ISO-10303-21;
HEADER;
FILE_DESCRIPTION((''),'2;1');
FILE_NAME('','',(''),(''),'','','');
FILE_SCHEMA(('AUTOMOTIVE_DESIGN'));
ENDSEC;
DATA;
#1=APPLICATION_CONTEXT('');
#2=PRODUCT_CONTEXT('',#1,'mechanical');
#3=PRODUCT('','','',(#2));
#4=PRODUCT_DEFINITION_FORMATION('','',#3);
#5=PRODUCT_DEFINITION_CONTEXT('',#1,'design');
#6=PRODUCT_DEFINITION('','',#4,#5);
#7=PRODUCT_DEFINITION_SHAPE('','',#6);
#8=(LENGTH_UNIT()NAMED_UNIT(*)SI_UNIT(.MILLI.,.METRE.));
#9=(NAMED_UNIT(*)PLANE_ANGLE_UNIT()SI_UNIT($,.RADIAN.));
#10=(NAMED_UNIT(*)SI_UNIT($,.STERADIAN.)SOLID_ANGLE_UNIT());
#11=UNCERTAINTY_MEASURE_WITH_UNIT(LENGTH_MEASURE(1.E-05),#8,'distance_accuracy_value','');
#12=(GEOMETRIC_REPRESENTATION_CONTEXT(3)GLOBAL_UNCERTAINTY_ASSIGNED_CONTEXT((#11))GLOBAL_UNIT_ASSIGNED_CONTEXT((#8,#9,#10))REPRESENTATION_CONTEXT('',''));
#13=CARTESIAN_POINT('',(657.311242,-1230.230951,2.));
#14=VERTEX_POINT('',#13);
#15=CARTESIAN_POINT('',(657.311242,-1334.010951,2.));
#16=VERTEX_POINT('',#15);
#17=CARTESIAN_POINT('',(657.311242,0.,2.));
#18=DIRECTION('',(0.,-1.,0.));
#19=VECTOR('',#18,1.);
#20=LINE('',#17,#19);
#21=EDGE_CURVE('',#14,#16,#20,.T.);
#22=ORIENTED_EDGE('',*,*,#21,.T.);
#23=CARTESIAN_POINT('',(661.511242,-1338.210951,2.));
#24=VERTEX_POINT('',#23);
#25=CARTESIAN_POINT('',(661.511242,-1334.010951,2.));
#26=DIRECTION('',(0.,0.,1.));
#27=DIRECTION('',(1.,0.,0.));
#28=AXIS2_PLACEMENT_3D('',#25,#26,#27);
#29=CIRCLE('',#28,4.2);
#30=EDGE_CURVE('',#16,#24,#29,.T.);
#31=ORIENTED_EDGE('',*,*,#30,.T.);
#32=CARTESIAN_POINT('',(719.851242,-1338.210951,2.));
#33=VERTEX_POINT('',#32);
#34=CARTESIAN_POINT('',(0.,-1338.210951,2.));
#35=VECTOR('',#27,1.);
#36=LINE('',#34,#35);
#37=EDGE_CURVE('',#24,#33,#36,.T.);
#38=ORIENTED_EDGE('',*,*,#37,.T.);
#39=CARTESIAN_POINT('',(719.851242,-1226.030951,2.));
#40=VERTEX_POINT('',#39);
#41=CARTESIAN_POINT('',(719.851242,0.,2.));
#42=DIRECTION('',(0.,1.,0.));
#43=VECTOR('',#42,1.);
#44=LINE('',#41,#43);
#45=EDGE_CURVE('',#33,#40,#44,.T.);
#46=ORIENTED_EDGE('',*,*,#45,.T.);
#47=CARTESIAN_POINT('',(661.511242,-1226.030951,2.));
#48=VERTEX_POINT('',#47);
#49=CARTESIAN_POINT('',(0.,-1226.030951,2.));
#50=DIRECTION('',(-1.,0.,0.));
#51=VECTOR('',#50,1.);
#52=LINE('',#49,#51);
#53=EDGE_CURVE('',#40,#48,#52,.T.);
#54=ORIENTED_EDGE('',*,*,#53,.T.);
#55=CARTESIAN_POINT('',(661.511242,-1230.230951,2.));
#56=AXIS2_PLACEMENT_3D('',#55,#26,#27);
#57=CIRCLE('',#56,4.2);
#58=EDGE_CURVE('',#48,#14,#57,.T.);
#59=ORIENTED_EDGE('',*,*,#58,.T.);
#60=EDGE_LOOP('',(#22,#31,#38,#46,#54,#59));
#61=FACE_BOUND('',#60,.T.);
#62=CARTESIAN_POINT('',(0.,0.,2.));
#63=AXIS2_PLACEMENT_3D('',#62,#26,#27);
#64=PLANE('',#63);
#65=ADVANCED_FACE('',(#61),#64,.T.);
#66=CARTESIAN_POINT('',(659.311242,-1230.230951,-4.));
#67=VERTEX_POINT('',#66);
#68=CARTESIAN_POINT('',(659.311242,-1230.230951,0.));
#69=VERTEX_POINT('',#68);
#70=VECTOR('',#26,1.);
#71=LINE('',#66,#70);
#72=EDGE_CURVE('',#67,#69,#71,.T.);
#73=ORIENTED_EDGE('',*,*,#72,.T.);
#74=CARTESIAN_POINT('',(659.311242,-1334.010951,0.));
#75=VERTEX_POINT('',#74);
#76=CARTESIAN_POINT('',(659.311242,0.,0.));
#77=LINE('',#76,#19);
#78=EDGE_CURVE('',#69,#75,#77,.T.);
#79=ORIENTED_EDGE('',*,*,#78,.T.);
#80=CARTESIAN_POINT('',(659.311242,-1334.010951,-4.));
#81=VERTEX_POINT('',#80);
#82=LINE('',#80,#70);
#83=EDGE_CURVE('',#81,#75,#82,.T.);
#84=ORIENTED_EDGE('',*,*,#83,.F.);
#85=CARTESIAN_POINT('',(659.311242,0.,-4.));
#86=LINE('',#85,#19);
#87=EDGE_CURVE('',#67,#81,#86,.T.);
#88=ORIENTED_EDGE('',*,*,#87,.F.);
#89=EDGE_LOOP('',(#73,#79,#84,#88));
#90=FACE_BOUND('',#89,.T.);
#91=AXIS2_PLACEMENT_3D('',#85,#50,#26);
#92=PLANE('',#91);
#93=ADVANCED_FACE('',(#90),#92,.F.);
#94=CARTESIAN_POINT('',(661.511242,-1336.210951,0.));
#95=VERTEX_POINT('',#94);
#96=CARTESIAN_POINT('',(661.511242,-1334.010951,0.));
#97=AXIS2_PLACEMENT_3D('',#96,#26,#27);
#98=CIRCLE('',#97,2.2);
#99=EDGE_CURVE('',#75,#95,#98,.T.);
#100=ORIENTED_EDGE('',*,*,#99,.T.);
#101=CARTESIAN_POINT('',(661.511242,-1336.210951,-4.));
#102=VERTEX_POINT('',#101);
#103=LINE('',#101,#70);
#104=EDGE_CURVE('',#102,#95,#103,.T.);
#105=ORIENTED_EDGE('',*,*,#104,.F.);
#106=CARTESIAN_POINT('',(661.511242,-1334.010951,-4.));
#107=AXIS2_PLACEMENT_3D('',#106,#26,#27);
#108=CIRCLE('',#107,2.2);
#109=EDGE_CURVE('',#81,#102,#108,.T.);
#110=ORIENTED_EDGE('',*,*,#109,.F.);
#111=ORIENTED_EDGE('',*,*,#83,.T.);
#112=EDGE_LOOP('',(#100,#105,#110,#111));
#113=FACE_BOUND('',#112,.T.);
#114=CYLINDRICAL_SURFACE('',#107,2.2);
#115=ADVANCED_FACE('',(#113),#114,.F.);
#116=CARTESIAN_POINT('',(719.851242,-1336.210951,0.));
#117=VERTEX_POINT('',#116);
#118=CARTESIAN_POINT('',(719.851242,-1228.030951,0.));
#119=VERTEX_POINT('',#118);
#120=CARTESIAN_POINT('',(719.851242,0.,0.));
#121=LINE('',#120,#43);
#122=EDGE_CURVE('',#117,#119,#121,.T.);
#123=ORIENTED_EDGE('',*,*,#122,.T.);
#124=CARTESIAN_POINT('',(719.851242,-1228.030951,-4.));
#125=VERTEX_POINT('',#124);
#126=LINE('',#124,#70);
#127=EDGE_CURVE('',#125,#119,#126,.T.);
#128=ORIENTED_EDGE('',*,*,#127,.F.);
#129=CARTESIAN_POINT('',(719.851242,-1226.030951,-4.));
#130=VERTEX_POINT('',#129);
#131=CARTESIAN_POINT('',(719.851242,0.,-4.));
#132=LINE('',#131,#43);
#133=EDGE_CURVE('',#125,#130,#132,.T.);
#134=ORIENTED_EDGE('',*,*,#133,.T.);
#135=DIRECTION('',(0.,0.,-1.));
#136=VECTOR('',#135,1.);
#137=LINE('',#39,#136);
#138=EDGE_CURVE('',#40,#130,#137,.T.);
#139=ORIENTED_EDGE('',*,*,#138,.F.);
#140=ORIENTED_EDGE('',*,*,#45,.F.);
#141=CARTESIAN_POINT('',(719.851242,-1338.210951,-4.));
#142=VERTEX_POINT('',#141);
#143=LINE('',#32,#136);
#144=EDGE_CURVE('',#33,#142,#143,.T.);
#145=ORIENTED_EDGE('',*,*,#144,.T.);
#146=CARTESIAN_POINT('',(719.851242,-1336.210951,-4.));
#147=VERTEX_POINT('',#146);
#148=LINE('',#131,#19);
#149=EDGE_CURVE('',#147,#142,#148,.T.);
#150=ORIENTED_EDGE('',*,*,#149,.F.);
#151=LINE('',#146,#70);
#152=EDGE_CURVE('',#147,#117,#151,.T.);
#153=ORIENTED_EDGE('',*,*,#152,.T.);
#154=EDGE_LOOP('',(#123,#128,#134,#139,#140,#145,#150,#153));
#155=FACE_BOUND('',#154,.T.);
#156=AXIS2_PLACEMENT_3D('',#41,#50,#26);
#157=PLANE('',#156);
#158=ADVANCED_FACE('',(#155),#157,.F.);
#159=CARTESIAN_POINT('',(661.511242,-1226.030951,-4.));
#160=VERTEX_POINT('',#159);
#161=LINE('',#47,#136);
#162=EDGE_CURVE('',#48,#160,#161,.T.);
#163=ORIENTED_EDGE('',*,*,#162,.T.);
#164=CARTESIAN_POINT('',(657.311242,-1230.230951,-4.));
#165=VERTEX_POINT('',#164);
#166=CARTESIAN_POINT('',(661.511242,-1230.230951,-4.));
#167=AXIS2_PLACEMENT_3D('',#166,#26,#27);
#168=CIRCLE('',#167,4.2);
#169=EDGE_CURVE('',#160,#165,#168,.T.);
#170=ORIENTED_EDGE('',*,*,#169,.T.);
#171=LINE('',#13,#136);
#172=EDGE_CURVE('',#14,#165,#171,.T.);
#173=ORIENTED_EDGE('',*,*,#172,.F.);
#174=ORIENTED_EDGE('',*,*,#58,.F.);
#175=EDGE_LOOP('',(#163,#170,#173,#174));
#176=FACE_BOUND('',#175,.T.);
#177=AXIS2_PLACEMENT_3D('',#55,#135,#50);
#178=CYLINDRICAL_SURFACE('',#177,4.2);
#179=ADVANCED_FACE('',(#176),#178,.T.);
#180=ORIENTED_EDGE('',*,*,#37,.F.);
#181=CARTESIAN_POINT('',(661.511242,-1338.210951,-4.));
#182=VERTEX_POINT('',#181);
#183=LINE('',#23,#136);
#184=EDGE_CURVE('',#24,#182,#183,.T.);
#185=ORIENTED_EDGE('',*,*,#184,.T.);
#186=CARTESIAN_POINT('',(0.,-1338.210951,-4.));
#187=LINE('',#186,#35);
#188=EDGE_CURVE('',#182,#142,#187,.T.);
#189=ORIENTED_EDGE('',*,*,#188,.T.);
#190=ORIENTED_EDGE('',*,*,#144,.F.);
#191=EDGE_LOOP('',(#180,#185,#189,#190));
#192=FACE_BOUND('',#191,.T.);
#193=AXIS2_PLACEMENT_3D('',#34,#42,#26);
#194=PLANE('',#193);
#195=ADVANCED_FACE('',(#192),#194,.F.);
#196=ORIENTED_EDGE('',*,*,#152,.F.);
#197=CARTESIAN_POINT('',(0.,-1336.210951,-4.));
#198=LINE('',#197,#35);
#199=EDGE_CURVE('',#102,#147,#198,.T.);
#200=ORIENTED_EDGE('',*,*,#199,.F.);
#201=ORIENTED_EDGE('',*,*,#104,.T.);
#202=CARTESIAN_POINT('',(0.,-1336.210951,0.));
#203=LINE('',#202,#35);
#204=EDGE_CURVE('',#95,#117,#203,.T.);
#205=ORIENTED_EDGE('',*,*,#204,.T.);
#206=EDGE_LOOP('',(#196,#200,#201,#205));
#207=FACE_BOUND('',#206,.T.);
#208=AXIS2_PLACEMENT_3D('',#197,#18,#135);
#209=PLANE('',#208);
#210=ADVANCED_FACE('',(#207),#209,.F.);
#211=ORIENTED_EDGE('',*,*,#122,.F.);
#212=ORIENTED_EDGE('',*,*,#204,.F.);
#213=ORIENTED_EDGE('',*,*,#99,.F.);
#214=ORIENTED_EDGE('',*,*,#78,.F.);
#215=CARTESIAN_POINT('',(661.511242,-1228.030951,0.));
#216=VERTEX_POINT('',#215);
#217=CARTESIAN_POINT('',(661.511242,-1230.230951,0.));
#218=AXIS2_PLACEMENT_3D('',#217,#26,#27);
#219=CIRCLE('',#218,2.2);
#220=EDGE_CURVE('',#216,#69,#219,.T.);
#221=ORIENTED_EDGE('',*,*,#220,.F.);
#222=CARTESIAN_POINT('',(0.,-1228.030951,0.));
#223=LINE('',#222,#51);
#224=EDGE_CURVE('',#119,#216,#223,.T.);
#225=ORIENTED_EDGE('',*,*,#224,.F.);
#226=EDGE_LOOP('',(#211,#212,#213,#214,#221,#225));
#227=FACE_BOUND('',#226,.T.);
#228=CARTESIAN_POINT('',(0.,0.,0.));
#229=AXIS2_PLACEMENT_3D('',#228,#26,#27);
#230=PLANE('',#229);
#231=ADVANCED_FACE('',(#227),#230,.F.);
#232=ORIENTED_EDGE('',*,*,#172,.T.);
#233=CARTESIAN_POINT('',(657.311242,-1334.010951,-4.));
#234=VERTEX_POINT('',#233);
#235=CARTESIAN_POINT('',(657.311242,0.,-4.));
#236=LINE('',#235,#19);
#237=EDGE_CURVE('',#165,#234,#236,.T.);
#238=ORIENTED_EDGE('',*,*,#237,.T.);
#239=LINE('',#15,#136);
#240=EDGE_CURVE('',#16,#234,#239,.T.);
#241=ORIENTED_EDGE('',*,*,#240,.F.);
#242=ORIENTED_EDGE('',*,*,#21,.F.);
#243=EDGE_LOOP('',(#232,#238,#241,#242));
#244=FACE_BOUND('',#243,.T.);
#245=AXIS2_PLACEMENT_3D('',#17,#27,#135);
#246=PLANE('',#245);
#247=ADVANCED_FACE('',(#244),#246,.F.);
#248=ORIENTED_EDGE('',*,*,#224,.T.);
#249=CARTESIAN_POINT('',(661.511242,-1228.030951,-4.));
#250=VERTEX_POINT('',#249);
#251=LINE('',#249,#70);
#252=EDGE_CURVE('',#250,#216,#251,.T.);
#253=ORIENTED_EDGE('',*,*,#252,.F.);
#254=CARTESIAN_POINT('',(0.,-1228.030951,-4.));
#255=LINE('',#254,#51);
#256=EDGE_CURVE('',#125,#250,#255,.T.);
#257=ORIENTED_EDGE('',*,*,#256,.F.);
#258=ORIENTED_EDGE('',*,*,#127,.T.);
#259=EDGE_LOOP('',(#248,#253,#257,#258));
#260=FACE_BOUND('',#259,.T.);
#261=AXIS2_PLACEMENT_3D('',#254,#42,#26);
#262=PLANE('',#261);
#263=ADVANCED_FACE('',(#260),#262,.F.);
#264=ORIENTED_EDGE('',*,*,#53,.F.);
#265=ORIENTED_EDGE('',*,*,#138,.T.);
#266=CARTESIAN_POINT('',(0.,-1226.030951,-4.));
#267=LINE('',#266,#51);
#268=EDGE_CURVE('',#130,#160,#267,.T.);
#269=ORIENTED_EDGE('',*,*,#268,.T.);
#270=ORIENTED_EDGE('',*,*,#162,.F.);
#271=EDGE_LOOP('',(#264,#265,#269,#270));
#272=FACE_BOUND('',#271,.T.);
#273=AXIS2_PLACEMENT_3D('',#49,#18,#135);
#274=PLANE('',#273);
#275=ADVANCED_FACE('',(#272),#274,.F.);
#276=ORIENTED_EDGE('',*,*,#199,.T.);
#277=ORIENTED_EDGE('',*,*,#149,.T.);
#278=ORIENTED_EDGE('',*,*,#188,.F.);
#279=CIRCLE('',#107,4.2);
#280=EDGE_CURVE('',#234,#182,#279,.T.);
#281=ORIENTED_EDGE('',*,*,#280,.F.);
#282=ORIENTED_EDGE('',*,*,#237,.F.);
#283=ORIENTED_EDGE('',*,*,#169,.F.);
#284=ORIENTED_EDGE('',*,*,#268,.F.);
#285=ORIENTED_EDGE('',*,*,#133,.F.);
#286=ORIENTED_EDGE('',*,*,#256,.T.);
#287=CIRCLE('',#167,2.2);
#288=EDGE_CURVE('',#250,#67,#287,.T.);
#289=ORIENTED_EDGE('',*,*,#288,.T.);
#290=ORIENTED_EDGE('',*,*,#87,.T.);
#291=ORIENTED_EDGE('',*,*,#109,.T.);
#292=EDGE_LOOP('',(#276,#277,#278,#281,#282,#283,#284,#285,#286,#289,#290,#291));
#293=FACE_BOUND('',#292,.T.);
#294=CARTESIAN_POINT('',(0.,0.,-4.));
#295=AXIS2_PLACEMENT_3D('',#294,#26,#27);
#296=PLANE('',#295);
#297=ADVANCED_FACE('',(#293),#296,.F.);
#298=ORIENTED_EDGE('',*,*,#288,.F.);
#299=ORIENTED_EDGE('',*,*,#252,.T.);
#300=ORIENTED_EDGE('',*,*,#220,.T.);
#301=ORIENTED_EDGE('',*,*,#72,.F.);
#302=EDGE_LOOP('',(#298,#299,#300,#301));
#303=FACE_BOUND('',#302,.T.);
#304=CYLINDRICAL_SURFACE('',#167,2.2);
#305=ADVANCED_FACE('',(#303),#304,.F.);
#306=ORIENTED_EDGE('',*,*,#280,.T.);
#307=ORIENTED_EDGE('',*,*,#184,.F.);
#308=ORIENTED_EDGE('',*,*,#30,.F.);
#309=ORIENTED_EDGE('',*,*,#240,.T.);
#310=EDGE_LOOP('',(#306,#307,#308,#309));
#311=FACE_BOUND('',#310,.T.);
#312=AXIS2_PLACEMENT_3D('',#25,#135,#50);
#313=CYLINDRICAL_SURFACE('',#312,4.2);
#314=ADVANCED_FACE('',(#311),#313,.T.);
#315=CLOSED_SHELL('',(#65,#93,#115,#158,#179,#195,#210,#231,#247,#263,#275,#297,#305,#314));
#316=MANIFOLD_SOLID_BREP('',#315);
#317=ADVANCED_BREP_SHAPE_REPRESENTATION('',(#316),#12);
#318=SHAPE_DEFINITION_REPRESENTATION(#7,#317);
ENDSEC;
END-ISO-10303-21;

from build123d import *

# Parameters (mm, degrees)
BOSS_EXTRUDE1_DEPTH = 2
BOSS_EXTRUDE2_START = -4
BOSS_EXTRUDE2_DEPTH = 4


with BuildPart() as part:
    # Sketch1 → Boss-Extrude1 (new body)
    with BuildSketch(Plane.XY):
        with BuildLine():
            ThreePointArc((661.511242052, -1226.030951231), (658.541393571, -1227.26110275), (657.311242052, -1230.230951231))
            Line((657.311242052, -1230.230951231), (657.311242052, -1334.010951231))
            ThreePointArc((657.311242052, -1334.010951231), (658.541393571, -1336.980799712), (661.511242052, -1338.210951231))
            Line((661.511242052, -1338.210951231), (719.851242052, -1338.210951231))
            Line((719.851242052, -1338.210951231), (719.851242052, -1226.030951231))
            Line((719.851242052, -1226.030951231), (661.511242052, -1226.030951231))
        make_face()
    extrude(amount=BOSS_EXTRUDE1_DEPTH)

    # Sketch1<3> → Boss-Extrude2 (add)
    with BuildSketch(Plane.XY.offset(BOSS_EXTRUDE2_START)):
        with BuildLine():
            ThreePointArc((661.511242052, -1226.030951231), (658.541393571, -1227.26110275), (657.311242052, -1230.230951231))
            Line((657.311242052, -1230.230951231), (657.311242052, -1334.010951231))
            ThreePointArc((657.311242052, -1334.010951231), (658.541393571, -1336.980799712), (661.511242052, -1338.210951231))
            Line((661.511242052, -1338.210951231), (719.851242052, -1338.210951231))
            Line((719.851242052, -1338.210951231), (719.851242052, -1336.210951231))
            Line((719.851242052, -1336.210951231), (661.511242052, -1336.210951231))
            ThreePointArc((661.511242052, -1336.210951231), (659.955607133, -1335.56658615), (659.311242052, -1334.010951231))
            Line((659.311242052, -1334.010951231), (659.311242052, -1230.230951231))
            ThreePointArc((659.311242052, -1230.230951231), (659.955607133, -1228.675316313), (661.511242052, -1228.030951231))
            Line((661.511242052, -1228.030951231), (719.851242052, -1228.030951231))
            Line((719.851242052, -1228.030951231), (719.851242052, -1226.030951231))
            Line((719.851242052, -1226.030951231), (661.511242052, -1226.030951231))
        make_face()
    extrude(amount=BOSS_EXTRUDE2_DEPTH)


solid = part.part
